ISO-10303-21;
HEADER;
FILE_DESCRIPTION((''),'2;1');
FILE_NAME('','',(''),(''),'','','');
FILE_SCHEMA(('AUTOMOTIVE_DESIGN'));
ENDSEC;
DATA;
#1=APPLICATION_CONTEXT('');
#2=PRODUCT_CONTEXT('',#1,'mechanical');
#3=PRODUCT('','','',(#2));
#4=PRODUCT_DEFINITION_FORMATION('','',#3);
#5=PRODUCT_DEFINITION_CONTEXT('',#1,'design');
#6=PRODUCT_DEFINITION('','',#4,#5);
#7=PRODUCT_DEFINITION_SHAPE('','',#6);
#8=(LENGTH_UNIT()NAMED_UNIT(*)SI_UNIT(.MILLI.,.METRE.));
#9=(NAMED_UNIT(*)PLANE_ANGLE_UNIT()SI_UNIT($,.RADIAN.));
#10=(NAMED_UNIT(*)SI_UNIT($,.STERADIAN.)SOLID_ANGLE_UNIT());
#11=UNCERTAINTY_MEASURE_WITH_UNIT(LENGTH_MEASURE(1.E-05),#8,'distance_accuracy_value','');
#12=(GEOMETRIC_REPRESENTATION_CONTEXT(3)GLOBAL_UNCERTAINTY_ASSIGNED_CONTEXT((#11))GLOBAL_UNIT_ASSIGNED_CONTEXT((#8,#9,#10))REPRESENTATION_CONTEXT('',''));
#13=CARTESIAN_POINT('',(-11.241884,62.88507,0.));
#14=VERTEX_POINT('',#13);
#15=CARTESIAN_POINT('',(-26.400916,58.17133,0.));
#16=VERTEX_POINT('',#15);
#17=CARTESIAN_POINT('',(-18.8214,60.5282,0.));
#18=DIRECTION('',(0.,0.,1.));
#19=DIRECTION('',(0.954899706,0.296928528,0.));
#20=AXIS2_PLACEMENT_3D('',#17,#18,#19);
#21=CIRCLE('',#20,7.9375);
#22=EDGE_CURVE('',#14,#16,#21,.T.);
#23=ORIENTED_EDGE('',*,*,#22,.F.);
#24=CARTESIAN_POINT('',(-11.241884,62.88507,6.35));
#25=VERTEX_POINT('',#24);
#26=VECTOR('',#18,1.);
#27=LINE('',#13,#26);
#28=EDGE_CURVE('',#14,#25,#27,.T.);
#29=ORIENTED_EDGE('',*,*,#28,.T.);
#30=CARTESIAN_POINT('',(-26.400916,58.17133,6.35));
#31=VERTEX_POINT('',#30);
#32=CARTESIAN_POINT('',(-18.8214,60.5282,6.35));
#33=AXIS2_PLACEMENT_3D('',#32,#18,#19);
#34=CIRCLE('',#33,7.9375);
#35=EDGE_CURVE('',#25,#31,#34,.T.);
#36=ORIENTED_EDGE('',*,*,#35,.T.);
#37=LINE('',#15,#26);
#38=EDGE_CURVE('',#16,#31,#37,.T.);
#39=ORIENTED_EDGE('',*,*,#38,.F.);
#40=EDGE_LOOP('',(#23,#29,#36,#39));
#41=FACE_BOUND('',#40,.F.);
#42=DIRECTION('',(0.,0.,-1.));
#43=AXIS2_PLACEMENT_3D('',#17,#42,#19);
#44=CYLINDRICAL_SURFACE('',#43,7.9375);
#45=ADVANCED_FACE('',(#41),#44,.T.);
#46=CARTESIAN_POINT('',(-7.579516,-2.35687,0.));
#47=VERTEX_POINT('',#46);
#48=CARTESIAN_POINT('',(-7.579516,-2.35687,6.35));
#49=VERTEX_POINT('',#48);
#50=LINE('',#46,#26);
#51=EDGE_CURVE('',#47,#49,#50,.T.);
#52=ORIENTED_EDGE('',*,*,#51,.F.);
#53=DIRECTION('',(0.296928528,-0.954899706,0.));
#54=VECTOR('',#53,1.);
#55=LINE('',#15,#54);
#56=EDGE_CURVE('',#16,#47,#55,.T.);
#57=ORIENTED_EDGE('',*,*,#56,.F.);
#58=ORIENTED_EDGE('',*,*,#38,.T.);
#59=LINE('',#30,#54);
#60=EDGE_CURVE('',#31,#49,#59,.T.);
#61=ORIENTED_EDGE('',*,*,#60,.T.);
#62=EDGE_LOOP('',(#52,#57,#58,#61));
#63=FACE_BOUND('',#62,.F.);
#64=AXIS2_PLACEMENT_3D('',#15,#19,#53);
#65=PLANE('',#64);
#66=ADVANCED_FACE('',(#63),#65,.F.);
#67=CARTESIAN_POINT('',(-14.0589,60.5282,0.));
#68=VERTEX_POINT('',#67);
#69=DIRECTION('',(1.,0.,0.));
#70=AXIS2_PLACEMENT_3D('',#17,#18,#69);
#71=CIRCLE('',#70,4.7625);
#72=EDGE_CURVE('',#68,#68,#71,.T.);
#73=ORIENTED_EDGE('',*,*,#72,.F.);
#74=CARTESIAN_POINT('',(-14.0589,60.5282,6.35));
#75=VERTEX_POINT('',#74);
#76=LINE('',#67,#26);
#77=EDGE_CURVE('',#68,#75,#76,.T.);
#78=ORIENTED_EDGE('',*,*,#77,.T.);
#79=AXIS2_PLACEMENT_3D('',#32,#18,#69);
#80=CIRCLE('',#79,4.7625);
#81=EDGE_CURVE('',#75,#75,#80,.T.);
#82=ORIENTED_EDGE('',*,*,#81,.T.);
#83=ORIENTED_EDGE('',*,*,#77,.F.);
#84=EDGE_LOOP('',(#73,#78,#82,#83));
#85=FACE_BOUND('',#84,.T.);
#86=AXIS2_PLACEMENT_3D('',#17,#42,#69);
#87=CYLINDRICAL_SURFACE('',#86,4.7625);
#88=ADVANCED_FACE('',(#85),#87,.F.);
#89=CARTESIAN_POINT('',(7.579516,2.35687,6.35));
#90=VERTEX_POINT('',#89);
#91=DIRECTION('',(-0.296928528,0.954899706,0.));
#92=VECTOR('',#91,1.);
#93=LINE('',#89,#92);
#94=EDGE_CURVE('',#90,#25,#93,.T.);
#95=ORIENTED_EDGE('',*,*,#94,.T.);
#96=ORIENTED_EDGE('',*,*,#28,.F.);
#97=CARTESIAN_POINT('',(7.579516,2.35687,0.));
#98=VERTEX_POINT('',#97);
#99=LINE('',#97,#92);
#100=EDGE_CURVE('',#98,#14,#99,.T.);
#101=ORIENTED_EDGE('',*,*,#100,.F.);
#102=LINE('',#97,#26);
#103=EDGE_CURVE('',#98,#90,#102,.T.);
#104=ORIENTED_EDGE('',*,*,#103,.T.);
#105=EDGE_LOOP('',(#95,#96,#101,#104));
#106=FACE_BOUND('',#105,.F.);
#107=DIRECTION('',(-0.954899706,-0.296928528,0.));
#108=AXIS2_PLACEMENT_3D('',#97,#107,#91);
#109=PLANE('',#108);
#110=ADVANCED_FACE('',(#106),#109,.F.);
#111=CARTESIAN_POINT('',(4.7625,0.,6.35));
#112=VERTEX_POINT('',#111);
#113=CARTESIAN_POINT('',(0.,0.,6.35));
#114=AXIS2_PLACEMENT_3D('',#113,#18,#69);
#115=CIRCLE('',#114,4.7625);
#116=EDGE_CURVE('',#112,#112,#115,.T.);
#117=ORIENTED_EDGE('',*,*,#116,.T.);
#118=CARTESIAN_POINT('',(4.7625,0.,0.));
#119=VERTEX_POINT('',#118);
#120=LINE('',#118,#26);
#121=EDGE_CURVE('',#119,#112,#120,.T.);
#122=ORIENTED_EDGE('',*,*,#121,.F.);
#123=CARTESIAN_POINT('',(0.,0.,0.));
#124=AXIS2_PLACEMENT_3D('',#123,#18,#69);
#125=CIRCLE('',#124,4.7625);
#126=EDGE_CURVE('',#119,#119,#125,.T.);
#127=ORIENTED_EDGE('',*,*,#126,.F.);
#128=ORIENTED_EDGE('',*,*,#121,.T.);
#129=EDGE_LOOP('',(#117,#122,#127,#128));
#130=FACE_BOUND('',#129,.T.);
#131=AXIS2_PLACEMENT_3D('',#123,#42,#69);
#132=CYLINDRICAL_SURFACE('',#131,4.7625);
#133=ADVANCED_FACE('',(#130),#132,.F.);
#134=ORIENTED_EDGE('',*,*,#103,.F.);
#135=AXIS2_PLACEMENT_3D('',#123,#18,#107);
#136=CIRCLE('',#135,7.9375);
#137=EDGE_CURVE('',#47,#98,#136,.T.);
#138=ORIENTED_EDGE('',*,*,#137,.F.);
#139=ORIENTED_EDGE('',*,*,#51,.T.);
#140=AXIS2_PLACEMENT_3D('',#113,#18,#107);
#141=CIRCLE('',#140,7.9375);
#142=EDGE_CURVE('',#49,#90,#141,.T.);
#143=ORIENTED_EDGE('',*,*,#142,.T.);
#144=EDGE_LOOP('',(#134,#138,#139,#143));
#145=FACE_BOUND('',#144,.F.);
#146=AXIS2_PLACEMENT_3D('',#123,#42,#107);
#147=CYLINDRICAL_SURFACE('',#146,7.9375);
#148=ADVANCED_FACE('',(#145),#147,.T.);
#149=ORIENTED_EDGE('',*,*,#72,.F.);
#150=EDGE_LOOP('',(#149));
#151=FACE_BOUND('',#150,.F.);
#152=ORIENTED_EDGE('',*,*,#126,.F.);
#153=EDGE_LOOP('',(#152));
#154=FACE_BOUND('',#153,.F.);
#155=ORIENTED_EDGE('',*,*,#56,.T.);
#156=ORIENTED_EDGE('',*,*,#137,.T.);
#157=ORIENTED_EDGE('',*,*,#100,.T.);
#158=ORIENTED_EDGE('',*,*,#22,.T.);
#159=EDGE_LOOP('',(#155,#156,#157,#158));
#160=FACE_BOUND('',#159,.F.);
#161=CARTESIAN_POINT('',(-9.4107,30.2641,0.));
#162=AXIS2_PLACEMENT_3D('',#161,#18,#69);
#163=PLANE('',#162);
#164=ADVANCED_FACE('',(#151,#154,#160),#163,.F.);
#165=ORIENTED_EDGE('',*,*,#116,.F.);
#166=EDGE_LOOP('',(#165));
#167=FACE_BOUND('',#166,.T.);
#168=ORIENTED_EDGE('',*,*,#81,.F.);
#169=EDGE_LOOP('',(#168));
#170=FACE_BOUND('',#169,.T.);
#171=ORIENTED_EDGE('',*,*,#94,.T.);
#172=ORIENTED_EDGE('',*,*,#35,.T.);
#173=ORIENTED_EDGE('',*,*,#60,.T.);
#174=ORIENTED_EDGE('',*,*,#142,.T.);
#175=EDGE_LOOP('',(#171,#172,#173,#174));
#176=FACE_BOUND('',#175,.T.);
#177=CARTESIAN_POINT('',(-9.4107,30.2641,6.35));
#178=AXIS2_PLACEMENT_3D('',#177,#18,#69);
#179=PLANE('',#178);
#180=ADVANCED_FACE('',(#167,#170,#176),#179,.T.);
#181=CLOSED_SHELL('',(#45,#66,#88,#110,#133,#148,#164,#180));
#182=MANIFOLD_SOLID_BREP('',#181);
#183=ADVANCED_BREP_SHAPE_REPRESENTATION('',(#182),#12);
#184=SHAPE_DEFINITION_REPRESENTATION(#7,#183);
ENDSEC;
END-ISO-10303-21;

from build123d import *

# Parameters (mm, degrees)
F0_R     = 4.7625
F1_DEPTH = 6.35


# Not quite as in the source:
# - a feature names something its author has since deleted; it is built from what else it names


with BuildPart() as f1:
    # F0 (on Top) → F1 (new body)
    with BuildSketch(Plane.XY):
        with BuildLine():
            Line((7.5795164193, 2.3568701916), (-11.2418835807, 62.8850701916))
            ThreePointArc((-11.2418835807, 62.8850701916), (-21.1782701916, 68.1077164193), (-26.4009164193, 58.1713298084))
            Line((-26.4009164193, 58.1713298084), (-7.5795164193, -2.3568701916))
            ThreePointArc((-7.5795164193, -2.3568701916), (2.3568701916, -7.5795164193), (7.5795164193, 2.3568701916))
        make_face()
        Circle(F0_R, mode=Mode.SUBTRACT)
        with Locations((-18.8214, 60.5282)):
            Circle(F0_R, mode=Mode.SUBTRACT)
    extrude(amount=F1_DEPTH)


solid = f1.part
